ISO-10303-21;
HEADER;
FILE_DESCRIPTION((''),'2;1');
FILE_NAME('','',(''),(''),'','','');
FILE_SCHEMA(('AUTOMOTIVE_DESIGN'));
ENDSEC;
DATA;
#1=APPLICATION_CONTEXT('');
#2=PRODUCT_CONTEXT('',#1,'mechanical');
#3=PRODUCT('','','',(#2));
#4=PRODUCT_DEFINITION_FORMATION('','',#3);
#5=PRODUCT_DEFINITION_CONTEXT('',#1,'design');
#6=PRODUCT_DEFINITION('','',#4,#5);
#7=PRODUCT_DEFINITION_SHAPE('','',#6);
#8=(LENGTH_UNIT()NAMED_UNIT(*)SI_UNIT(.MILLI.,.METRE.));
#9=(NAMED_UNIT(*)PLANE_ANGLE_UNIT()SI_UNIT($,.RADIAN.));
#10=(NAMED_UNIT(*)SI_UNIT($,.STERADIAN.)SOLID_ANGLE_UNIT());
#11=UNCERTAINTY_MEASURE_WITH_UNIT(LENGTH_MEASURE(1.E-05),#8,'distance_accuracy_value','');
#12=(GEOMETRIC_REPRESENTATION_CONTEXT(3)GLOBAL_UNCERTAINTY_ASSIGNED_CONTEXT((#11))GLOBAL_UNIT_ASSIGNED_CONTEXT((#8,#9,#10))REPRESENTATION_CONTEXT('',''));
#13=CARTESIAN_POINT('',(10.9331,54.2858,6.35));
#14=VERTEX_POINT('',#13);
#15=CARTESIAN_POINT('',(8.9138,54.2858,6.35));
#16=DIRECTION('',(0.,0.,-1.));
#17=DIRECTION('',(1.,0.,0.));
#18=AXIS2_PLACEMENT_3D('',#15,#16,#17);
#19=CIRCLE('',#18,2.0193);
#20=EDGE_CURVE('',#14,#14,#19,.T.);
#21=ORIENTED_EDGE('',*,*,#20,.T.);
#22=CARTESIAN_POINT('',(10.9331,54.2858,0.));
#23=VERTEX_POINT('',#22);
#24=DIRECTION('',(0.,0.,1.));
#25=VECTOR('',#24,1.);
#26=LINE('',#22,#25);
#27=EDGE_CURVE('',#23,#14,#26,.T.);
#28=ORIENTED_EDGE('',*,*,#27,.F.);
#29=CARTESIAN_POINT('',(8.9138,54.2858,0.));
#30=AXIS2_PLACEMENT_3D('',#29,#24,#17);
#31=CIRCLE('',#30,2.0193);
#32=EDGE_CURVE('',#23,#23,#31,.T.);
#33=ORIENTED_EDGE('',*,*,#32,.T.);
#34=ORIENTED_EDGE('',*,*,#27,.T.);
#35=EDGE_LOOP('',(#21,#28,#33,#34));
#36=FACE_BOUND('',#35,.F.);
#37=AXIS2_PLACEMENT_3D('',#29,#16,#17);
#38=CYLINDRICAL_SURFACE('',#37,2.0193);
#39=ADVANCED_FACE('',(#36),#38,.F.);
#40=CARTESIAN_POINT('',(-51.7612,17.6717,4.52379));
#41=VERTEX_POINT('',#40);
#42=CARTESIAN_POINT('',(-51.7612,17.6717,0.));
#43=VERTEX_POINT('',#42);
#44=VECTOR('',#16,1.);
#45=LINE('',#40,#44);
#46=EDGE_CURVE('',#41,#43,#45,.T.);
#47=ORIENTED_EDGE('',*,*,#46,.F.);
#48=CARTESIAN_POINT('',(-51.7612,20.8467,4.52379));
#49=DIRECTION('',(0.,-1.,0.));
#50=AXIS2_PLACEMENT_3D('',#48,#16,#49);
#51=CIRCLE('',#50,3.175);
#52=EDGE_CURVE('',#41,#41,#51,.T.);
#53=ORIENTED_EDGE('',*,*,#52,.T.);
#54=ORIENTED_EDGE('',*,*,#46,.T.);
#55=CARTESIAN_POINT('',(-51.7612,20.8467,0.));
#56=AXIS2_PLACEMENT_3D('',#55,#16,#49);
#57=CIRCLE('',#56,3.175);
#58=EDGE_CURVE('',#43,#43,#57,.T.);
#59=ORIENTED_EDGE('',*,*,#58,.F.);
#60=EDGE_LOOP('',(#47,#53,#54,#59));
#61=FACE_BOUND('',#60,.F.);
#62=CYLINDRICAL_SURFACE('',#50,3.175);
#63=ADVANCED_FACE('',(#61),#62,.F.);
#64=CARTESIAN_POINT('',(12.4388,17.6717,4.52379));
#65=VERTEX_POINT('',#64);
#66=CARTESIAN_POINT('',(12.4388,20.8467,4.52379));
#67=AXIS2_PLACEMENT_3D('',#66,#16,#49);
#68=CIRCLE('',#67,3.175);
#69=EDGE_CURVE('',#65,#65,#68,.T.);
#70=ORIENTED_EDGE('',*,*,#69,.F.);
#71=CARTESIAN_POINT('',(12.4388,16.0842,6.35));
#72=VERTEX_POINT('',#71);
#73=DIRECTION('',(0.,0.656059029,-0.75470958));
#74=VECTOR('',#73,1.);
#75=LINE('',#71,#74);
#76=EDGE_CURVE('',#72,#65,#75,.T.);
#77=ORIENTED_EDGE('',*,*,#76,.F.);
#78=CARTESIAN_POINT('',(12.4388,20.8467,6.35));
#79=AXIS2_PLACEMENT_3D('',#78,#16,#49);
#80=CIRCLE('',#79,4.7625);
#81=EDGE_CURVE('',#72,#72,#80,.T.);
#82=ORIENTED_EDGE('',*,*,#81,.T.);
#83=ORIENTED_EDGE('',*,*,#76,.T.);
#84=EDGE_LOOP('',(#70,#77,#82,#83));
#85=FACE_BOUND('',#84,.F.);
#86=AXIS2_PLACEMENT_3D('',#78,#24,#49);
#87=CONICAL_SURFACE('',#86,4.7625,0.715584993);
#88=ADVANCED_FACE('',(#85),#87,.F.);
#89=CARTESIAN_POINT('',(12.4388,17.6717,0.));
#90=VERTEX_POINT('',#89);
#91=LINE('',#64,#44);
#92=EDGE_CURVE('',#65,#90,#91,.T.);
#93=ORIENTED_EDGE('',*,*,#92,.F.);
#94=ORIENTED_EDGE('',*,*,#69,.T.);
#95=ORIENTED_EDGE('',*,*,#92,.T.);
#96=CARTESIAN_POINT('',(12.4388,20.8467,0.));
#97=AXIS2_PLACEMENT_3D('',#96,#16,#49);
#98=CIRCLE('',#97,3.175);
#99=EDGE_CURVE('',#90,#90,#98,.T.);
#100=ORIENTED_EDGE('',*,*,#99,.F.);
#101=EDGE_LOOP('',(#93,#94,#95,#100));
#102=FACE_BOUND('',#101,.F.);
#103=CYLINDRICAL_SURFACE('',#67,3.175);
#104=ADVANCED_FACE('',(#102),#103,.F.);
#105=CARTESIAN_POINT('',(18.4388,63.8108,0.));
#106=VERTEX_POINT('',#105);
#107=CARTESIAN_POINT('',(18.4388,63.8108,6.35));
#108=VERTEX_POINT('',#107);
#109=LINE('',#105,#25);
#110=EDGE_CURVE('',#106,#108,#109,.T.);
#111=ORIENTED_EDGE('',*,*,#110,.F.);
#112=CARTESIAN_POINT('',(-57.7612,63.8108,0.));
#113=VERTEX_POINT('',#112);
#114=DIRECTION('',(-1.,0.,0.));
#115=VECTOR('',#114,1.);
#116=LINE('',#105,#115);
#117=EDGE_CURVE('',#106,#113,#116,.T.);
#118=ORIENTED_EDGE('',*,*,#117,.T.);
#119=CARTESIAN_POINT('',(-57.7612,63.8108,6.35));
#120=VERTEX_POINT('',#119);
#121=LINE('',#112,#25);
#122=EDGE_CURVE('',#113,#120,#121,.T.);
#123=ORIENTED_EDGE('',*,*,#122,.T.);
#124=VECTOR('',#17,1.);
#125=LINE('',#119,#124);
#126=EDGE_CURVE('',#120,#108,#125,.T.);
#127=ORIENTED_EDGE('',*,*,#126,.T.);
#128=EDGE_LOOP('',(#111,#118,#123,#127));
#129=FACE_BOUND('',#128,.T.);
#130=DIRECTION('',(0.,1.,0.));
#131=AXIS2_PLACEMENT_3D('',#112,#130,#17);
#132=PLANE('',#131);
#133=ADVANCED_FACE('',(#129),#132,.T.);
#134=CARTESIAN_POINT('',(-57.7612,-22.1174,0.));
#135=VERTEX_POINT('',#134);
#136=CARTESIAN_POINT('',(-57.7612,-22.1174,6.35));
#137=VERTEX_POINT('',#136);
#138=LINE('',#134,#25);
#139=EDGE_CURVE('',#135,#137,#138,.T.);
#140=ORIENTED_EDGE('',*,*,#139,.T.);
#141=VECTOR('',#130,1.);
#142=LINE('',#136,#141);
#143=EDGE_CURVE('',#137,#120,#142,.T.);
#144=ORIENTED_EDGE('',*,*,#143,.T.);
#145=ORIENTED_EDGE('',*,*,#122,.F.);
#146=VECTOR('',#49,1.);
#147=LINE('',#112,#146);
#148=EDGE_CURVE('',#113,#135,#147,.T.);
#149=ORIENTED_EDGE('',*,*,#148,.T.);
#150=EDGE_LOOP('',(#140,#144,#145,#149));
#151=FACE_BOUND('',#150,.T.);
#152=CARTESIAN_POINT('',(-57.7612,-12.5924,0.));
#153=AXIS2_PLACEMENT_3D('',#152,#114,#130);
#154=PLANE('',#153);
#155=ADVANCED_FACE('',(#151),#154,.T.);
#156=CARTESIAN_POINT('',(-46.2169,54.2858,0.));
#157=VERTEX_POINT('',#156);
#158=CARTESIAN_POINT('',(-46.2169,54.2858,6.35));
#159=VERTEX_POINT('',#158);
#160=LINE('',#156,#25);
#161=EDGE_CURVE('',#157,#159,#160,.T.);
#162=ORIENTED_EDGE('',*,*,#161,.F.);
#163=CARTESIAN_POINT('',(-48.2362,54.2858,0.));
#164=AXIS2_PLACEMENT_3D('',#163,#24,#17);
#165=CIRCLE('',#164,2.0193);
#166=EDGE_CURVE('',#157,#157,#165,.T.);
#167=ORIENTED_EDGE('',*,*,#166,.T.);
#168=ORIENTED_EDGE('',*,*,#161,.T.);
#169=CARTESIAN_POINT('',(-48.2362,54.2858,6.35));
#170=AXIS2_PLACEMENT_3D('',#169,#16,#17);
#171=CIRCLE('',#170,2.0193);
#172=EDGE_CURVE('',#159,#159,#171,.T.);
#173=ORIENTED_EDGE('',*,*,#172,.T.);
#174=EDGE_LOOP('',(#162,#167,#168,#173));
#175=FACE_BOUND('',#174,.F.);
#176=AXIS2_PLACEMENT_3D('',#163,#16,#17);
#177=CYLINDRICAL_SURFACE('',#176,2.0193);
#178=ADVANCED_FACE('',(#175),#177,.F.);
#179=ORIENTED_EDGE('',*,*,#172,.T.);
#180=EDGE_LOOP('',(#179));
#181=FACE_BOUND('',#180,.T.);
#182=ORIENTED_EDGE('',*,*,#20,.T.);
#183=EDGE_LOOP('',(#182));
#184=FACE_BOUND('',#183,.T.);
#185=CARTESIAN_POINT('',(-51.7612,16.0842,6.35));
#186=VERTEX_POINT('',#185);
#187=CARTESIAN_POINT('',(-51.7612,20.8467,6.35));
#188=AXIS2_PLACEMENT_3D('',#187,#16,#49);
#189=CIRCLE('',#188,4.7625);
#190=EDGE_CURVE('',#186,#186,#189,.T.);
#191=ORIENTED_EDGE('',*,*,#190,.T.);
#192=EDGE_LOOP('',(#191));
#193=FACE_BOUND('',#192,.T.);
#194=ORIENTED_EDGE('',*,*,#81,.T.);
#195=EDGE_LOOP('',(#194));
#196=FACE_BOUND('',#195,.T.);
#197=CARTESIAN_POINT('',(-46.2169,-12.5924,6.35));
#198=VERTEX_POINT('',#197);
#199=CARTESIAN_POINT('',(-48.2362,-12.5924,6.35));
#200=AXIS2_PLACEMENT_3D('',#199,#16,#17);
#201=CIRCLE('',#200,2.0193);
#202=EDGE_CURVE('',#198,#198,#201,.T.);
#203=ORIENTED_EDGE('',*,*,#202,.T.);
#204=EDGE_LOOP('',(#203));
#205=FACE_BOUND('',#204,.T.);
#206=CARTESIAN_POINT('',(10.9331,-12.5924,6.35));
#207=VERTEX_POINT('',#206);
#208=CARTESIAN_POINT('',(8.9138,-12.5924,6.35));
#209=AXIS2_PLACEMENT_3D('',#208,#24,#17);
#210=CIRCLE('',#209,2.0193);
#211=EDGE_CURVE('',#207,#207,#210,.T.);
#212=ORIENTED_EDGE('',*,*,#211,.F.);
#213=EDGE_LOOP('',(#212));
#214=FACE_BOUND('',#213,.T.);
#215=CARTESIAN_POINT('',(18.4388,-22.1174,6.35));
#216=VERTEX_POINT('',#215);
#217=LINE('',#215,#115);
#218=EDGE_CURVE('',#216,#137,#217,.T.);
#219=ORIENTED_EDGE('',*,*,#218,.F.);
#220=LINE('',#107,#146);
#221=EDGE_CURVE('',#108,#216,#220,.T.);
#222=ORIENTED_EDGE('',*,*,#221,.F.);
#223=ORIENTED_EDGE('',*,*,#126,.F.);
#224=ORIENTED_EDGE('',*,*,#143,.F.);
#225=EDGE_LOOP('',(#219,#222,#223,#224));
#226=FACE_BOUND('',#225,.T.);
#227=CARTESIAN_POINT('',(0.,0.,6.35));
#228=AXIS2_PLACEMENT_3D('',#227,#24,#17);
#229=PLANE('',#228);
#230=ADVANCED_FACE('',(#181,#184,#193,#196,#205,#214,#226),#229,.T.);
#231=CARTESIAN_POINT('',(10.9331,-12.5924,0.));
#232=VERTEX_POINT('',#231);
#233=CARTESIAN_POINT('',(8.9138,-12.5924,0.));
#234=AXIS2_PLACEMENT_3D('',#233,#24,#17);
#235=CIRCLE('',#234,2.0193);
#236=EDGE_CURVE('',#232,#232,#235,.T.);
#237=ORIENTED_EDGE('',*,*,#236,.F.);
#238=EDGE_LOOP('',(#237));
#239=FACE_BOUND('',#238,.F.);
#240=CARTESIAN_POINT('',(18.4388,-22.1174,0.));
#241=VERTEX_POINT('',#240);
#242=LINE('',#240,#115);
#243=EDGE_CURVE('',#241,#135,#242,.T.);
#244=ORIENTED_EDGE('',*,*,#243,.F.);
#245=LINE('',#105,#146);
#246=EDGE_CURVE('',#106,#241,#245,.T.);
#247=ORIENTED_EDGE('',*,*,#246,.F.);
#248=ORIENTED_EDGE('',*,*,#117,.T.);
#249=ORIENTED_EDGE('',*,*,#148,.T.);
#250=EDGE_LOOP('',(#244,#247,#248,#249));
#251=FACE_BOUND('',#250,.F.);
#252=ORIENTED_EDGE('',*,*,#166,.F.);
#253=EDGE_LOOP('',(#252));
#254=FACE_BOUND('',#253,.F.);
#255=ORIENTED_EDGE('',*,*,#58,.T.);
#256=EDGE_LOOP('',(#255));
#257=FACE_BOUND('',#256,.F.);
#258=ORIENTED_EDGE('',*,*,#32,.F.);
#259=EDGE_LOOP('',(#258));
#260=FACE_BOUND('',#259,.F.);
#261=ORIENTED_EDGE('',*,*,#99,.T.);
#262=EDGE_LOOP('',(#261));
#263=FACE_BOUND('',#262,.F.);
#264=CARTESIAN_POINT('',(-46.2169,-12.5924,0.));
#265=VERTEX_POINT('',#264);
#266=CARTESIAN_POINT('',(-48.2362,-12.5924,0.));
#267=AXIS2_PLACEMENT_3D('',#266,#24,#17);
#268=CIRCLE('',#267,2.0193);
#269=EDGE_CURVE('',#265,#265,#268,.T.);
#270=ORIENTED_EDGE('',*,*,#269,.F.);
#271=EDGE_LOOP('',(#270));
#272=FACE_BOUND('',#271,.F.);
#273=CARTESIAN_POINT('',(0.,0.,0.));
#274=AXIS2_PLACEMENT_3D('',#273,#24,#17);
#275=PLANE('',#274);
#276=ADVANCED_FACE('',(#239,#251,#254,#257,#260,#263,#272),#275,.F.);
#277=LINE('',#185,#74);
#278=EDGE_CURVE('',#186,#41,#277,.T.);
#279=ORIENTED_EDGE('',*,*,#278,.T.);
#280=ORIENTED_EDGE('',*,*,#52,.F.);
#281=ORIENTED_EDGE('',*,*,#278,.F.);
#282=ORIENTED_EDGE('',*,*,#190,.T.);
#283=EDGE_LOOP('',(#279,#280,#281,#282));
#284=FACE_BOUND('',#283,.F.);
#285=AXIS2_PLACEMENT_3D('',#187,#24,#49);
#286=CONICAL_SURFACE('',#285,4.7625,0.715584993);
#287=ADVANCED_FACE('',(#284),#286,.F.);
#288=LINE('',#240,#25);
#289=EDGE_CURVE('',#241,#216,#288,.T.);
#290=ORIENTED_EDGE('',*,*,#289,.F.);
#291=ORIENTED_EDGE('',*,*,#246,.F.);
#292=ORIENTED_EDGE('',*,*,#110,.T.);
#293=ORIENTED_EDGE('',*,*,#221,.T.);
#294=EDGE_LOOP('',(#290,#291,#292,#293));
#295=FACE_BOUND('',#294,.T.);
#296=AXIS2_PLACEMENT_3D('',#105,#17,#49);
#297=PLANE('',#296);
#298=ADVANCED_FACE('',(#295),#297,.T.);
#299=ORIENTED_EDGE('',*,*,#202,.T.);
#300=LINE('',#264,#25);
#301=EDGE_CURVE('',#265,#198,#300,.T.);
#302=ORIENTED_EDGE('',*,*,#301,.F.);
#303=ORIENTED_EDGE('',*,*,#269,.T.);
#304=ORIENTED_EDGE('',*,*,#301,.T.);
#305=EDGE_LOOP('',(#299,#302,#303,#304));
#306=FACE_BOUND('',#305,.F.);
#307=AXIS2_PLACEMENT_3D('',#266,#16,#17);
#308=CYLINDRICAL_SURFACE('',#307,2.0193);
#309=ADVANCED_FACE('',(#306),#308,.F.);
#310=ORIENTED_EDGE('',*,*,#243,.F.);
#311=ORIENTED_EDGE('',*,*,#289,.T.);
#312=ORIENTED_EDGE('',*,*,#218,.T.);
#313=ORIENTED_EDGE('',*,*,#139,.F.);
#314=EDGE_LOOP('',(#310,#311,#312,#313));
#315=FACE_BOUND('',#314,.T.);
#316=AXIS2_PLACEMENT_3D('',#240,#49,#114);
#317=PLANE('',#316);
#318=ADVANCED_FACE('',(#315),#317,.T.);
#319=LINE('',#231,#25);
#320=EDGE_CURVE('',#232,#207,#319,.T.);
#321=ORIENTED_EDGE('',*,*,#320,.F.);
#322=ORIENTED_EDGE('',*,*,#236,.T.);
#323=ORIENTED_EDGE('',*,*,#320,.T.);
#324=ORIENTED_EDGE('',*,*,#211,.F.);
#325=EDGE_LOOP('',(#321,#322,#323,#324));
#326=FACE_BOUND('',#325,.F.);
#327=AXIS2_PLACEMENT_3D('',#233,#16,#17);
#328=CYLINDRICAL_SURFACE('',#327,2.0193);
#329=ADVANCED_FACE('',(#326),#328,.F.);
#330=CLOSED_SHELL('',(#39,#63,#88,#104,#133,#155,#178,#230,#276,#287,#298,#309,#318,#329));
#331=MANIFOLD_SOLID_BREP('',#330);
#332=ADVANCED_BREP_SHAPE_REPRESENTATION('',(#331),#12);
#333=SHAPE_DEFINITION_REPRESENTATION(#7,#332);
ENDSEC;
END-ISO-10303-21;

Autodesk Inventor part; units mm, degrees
ref_plane "YZ Plane" through (0, 0, 0) normal (1, 0, 0) x (0, 1, 0)
ref_plane "XZ Plane" through (0, 0, 0) normal (0, 1, 0) x (-1, 0, 0)
ref_plane "XY Plane" through (0, 0, 0) normal (0, 0, 1) x (1, 0, 0)
sketch "Sketch1" plane through (0, 0, 0) normal (0, 0, 1) x (1, 0, 0)
  line L0 (-57.7612, 63.8108) -> (18.4388, 63.8108)
  line L1 (18.4388, 63.8108) -> (18.4388, -22.1174)
  line L2 (18.4388, -22.1174) -> (-57.7612, -22.1174)
  line L3 (-57.7612, -22.1174) -> (-57.7612, 63.8108)
  line L4 (-57.7612, 63.8108) -> (-48.2362, 63.8108)
  line L5 (-48.2362, 63.8108) -> (-48.2362, 54.2858)
  line L6 (18.4388, 63.8108) -> (8.9138, 63.8108)
  line L7 (8.9138, 63.8108) -> (8.9138, 54.2858)
  line L8 (-57.7612, -22.1174) -> (-57.7612, -12.5924)
  line L9 (-57.7612, -12.5924) -> (-48.2362, -12.5924)
  circle A0 centre (-48.2362, 54.2858) radius 2.0193
  circle A1 centre (8.9138, 54.2858) radius 2.0193
  circle A2 centre (-48.2362, -12.5924) radius 2.0193
  circle A3 centre (8.9138, -12.5924) radius 2.0193
  circle A4 centre (-51.7612, 20.8467) radius 3.048
  circle A5 centre (12.4388, 20.8467) radius 3.048
  point P0 (0, 0)
  dimension "d0" = 76.2
  dimension "d1" = 85.9282
  dimension "d2" = 9.525
  dimension "d3" = 9.525
  dimension "d4" = 9.525
  dimension "d5" = 9.525
  dimension "d6" = 9.525
  dimension "d7" = 9.525
  dimension "d8" = 4.0386
  dimension "d9" = 4.0386
  dimension "d10" = 4.0386
  dimension "d11" = 4.0386
  dimension "d15" = 6.096
  dimension "d16" = 6.096
extrude "Extrusion1" add sketch "Sketch1" along normal blind 6.35
sketch "Sketch2" plane through (0, 0, 6.35) normal (0, 0, 1) x (1, 0, 0)
  circle A0 centre (12.4388, 20.8467) radius 3.048 projected
  circle A1 centre (-51.7612, 20.8467) radius 3.048 projected
  circle A2 centre (-51.7612, 20.8467) radius 3.048
  circle A3 centre (12.4388, 20.8467) radius 3.048
  point P0 (0, 0)
hole "Hole1" at (-51.7612, 20.8467, 6.35) at (12.4388, 20.8467, 6.35) direction (0, 0, -1) diameter 6.35 depth 25.4 tip angle 118 countersink diameter 9.525 countersink angle 82
properties part number "glass socket bottom"
